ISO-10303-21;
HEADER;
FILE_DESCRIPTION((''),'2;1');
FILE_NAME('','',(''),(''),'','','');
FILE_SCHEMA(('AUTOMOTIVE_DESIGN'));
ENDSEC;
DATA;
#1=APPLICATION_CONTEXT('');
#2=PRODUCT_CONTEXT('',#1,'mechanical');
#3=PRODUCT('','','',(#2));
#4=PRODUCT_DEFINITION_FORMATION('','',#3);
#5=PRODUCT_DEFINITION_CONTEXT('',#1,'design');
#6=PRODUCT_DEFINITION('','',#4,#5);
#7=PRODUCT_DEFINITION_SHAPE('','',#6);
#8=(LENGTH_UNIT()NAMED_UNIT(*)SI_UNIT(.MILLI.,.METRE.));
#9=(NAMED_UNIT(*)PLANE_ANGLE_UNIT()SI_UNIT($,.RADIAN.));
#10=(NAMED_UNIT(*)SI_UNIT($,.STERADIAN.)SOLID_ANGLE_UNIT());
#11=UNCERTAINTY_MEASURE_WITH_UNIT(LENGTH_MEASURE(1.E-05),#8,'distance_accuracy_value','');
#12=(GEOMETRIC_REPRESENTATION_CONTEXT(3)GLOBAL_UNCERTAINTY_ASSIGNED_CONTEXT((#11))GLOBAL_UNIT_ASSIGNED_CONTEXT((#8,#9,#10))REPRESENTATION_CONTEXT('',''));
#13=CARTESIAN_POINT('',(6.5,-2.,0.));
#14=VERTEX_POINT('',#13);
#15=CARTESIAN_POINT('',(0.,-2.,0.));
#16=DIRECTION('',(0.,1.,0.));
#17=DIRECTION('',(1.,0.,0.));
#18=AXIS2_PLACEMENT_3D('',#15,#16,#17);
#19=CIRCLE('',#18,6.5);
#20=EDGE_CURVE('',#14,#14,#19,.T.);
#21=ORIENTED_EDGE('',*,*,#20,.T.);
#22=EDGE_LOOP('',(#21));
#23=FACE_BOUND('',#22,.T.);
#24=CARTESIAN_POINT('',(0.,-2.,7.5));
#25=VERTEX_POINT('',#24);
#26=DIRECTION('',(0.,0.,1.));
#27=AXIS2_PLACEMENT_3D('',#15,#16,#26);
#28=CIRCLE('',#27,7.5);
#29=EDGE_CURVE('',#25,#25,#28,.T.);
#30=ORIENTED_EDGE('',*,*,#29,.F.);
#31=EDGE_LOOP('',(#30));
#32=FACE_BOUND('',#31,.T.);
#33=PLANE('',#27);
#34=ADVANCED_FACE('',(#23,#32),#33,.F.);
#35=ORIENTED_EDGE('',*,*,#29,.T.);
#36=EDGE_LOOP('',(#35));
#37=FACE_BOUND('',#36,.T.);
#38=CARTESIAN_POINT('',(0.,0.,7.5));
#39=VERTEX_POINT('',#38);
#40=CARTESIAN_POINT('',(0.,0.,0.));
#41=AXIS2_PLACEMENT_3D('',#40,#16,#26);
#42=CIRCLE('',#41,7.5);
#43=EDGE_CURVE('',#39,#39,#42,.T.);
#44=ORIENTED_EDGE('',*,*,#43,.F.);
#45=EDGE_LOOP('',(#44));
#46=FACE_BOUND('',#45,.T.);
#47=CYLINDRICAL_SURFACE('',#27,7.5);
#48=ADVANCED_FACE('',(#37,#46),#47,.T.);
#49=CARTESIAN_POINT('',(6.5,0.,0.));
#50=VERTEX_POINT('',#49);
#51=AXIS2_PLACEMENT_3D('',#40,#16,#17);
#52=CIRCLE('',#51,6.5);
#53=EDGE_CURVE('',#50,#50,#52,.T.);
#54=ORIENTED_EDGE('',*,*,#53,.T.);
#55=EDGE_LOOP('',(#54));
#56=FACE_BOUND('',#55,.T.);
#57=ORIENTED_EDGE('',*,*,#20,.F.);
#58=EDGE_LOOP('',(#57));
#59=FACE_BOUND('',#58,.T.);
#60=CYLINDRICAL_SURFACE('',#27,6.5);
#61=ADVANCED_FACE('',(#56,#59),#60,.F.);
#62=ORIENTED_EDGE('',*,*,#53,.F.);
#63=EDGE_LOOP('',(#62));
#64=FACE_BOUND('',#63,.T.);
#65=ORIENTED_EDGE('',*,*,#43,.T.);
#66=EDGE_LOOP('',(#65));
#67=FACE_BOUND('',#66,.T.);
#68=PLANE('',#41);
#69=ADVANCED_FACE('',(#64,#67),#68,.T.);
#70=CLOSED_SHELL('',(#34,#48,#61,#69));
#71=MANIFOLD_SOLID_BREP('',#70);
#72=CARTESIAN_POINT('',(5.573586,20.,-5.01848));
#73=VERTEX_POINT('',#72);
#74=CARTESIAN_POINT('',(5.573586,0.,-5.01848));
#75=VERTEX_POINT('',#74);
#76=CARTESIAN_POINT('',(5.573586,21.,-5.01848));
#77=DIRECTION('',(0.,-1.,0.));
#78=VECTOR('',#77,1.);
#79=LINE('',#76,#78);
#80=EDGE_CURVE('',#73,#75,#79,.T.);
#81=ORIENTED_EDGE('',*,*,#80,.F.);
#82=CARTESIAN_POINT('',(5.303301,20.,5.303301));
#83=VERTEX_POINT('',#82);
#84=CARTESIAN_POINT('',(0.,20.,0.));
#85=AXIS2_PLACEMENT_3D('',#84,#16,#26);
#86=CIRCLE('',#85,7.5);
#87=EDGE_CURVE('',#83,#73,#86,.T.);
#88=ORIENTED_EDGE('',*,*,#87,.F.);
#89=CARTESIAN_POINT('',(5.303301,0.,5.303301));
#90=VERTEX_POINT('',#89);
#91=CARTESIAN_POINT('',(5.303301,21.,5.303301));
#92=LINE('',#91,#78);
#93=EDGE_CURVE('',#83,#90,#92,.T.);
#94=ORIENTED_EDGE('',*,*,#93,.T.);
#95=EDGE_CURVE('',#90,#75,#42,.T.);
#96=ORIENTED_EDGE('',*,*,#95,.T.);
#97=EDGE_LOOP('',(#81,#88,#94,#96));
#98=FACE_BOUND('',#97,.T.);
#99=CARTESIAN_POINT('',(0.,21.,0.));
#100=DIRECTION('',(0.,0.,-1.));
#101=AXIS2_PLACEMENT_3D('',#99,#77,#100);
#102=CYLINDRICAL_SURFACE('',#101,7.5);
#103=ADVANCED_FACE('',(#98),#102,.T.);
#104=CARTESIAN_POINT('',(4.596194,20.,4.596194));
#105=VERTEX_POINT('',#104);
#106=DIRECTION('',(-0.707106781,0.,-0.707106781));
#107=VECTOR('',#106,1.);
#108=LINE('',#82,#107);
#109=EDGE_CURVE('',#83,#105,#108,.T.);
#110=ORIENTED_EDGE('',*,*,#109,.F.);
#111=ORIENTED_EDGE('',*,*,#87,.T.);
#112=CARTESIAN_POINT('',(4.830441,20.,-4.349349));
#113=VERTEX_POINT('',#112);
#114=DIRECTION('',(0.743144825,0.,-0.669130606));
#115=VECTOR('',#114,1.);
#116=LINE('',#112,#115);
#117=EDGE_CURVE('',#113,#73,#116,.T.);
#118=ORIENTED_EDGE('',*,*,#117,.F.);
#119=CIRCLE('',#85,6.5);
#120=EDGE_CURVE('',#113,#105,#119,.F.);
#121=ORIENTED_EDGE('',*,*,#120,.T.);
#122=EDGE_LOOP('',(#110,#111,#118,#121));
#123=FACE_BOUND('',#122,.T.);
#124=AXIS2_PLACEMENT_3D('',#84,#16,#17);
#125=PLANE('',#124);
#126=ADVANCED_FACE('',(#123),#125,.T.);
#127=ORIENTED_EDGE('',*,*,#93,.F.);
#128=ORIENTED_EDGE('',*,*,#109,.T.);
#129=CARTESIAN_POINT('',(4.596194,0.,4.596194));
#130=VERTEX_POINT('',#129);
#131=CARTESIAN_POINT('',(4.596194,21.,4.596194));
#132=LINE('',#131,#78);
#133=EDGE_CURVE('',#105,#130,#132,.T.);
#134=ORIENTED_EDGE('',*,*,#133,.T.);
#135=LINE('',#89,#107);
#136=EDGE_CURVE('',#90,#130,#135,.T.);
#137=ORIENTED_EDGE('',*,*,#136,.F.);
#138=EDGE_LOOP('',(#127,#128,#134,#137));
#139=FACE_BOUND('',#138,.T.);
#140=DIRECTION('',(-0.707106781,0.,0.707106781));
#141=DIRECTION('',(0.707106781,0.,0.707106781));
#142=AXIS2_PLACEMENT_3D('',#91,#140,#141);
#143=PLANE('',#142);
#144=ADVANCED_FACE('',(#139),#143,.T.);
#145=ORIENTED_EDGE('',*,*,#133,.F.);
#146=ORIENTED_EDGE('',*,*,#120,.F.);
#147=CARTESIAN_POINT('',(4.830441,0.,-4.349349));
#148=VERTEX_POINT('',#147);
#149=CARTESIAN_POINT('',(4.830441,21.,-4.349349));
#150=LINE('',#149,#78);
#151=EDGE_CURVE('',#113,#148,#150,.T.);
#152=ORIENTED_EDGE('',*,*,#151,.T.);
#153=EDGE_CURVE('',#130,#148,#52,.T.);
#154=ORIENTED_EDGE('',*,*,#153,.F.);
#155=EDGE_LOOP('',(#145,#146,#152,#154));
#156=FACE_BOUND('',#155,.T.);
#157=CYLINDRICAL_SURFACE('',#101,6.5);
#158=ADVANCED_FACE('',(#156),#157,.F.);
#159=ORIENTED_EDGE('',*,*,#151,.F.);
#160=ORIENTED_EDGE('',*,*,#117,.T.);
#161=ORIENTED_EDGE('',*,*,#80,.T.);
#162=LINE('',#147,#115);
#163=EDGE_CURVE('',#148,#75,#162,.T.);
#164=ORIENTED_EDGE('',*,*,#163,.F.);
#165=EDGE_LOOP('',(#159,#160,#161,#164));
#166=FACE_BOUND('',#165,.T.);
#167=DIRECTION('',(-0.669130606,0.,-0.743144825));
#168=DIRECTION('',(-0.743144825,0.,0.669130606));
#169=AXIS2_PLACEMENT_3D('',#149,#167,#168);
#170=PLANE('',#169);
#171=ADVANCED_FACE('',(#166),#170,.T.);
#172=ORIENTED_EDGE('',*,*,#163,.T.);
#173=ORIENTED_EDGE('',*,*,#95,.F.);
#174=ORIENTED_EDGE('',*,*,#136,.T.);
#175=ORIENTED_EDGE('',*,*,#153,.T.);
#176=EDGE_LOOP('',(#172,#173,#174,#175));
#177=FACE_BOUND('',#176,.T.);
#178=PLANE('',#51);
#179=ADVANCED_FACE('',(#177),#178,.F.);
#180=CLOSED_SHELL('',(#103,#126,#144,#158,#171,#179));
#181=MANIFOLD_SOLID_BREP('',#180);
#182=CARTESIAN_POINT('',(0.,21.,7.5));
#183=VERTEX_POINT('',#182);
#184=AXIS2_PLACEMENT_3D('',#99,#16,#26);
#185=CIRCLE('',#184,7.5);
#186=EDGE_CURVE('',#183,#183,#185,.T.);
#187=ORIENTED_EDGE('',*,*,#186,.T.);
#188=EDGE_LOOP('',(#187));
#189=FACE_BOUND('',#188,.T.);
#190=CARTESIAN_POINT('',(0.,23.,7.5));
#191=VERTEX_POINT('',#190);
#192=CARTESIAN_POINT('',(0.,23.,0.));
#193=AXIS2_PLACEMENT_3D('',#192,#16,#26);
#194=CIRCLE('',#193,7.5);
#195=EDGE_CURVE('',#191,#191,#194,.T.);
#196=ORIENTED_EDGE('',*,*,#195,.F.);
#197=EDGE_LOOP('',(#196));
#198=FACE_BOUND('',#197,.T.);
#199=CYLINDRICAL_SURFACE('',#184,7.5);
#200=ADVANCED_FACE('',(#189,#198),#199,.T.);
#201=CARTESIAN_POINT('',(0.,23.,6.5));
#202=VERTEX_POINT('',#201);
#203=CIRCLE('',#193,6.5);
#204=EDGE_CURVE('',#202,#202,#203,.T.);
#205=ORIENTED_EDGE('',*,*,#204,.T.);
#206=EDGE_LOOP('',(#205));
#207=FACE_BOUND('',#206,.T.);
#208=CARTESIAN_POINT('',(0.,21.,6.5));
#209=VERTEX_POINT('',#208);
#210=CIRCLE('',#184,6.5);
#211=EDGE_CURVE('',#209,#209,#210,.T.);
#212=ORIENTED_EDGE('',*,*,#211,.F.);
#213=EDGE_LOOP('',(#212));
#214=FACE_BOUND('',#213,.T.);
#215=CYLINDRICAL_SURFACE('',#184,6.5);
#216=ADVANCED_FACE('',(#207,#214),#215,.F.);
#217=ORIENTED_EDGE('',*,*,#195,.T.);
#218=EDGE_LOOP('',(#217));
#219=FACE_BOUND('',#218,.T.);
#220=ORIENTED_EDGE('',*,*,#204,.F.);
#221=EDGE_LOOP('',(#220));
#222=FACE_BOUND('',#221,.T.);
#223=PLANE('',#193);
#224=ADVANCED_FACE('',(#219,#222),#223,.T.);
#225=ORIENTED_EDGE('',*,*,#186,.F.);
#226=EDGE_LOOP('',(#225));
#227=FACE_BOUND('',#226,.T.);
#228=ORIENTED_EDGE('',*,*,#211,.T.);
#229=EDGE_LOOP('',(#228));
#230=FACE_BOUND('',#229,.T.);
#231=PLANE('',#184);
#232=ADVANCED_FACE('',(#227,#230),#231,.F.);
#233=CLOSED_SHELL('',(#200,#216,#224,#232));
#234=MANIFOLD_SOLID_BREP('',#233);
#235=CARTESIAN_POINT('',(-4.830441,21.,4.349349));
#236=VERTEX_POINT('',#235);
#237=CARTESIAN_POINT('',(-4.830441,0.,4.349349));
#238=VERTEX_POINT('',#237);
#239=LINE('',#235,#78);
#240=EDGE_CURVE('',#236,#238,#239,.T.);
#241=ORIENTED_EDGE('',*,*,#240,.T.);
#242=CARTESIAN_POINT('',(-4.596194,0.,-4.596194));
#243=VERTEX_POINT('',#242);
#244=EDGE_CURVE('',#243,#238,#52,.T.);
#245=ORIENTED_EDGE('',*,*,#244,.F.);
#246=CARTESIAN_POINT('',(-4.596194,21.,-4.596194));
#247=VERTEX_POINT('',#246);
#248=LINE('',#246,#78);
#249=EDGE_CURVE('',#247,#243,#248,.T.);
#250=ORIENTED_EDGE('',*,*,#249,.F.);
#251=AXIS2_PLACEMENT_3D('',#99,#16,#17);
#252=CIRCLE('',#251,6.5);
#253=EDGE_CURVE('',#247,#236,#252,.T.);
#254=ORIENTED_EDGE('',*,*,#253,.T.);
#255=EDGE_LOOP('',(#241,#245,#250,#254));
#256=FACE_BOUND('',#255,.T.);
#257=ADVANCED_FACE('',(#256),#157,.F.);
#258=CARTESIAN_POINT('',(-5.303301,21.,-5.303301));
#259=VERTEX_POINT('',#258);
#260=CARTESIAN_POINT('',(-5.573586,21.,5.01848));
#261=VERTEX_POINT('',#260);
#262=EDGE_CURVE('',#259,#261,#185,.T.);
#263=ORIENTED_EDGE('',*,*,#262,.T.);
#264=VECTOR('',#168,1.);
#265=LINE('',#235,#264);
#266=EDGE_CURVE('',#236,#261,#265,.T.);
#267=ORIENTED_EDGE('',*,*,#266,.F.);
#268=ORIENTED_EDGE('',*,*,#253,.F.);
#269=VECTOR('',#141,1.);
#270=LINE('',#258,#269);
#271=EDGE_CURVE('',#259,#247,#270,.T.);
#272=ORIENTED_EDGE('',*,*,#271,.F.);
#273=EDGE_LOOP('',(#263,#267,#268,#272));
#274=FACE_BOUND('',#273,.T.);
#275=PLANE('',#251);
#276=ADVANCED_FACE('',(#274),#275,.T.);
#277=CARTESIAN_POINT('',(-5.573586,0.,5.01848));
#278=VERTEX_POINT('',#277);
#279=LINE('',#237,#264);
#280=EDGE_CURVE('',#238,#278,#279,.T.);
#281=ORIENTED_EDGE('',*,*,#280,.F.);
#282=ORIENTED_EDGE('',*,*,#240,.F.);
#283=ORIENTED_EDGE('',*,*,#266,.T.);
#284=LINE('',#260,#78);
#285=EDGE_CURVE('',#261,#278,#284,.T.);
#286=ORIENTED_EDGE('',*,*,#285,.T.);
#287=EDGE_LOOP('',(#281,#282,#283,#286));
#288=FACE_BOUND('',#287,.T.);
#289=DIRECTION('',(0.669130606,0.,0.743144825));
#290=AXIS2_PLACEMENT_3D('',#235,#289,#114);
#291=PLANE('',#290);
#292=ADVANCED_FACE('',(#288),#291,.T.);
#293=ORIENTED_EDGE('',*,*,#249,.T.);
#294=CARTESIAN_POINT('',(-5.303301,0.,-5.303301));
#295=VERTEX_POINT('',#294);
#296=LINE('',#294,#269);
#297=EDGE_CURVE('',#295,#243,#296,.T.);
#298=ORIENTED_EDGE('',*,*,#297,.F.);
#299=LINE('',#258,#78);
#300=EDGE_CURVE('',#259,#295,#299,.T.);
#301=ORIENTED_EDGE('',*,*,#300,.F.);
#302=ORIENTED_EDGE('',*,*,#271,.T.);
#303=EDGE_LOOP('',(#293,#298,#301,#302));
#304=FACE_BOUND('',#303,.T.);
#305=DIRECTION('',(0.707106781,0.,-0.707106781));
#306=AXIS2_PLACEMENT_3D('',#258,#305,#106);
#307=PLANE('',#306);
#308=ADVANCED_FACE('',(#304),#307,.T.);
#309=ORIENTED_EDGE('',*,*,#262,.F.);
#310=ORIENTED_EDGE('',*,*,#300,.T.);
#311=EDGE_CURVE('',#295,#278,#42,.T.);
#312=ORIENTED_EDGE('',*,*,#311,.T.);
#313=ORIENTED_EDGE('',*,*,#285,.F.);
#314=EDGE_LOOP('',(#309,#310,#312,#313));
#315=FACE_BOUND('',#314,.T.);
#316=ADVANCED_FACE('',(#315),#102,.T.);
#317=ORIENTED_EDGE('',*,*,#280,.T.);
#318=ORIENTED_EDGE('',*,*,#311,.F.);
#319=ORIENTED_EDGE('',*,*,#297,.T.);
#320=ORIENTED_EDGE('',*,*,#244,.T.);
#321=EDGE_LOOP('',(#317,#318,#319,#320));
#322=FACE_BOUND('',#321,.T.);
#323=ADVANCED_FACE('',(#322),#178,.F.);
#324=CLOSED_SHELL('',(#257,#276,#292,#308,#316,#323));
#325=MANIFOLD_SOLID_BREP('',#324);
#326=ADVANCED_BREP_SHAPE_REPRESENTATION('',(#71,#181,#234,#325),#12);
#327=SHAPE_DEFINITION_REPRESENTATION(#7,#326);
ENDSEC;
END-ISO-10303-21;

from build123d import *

# Parameters (mm, degrees)
EXTRUDE_THIN1_DEPTH     = 21
EXTRUDE_THIN1_2_DEPTH   = 21
SKETCH5_R               = 7.5
SKETCH5_R_2             = 6.5
EXTRUDE_THIN5_DEPTH     = 2
F_3DSKETCH3_R           = 7.5
F_3DSKETCH3_R_2         = 6.5
BOSS_EXTRUDE3_DEPTH     = 2
CUT_EXTRUDE1_DEPTH      = 26.327850284
CUT_EXTRUDE1_DEPTH_BACK = 1


with BuildPart() as part:
    # Sketch1 → Extrude-Thin1 (new body)
    with BuildSketch(Plane(origin=(0, 0, 0), x_dir=(1, 0, 0), z_dir=(0, 1, 0))):
        with BuildLine():
            ThreePointArc((-5.303300859, 5.303300859), (-7.497429937, 0.196327112), (-5.573586191, -5.018479548))
            Line((-5.573586191, -5.018479548), (-4.830441366, -4.349348941))
            ThreePointArc((-4.830441366, -4.349348941), (-6.497772612, 0.170150164), (-4.596194078, 4.596194078))
            Line((-4.596194078, 4.596194078), (-5.303300859, 5.303300859))
        make_face()
    extrude(amount=EXTRUDE_THIN1_DEPTH)


with BuildPart() as body_2:
    # Sketch1 → Extrude-Thin1 2 (new body)
    with BuildSketch(Plane(origin=(0, 0, 0), x_dir=(1, 0, 0), z_dir=(0, 1, 0))):
        with BuildLine():
            ThreePointArc((5.303300859, -5.303300859), (7.497429937, -0.196327112), (5.573586191, 5.018479548))
            Line((5.573586191, 5.018479548), (4.830441366, 4.349348941))
            ThreePointArc((4.830441366, 4.349348941), (6.497772612, -0.170150164), (4.596194078, -4.596194078))
            Line((4.596194078, -4.596194078), (5.303300859, -5.303300859))
        make_face()
    extrude(amount=EXTRUDE_THIN1_2_DEPTH)

    # Sketch12 → Cut-Extrude1 (cut, two sides: drawn at the far end of the back side and taken through both)
    with BuildSketch(Plane(origin=(0, 21, 0), x_dir=(1, 0, 0), z_dir=(0, 1, 0)).offset(-CUT_EXTRUDE1_DEPTH_BACK)):
        with BuildLine():
            Line((-24.753966258, 37.206162292), (4.830441366, 4.349348941))
            ThreePointArc((4.830441366, 4.349348941), (6.497772612, -0.170150164), (4.596194078, -4.596194078))
            Line((4.596194078, -4.596194078), (-26.66726189, -35.859650045))
            Line((-26.66726189, -35.859650045), (61.72884346, -38.174383527))
            Line((61.72884346, -38.174383527), (63.642139092, 34.891428811))
            Line((63.642139092, 34.891428811), (-24.753966258, 37.206162292))
        make_face()
    extrude(amount=CUT_EXTRUDE1_DEPTH + CUT_EXTRUDE1_DEPTH_BACK, mode=Mode.SUBTRACT)


with BuildPart() as body_3:
    # Sketch5 → Extrude-Thin5 (new body)
    with BuildSketch(Plane(origin=(0, 0, 0), x_dir=(1, 0, 0), z_dir=(0, 1, 0))):
        Circle(SKETCH5_R)
        Circle(SKETCH5_R_2, mode=Mode.SUBTRACT)
    extrude(amount=-EXTRUDE_THIN5_DEPTH)


with BuildPart() as body_4:
    # 3DSketch3 → Boss-Extrude3 (new body)
    with BuildSketch(Plane.ZX.offset(21)):
        Circle(F_3DSKETCH3_R)
        Circle(F_3DSKETCH3_R_2, mode=Mode.SUBTRACT)
    extrude(amount=BOSS_EXTRUDE3_DEPTH)


solid = Compound([part.part, body_2.part, body_3.part, body_4.part])
